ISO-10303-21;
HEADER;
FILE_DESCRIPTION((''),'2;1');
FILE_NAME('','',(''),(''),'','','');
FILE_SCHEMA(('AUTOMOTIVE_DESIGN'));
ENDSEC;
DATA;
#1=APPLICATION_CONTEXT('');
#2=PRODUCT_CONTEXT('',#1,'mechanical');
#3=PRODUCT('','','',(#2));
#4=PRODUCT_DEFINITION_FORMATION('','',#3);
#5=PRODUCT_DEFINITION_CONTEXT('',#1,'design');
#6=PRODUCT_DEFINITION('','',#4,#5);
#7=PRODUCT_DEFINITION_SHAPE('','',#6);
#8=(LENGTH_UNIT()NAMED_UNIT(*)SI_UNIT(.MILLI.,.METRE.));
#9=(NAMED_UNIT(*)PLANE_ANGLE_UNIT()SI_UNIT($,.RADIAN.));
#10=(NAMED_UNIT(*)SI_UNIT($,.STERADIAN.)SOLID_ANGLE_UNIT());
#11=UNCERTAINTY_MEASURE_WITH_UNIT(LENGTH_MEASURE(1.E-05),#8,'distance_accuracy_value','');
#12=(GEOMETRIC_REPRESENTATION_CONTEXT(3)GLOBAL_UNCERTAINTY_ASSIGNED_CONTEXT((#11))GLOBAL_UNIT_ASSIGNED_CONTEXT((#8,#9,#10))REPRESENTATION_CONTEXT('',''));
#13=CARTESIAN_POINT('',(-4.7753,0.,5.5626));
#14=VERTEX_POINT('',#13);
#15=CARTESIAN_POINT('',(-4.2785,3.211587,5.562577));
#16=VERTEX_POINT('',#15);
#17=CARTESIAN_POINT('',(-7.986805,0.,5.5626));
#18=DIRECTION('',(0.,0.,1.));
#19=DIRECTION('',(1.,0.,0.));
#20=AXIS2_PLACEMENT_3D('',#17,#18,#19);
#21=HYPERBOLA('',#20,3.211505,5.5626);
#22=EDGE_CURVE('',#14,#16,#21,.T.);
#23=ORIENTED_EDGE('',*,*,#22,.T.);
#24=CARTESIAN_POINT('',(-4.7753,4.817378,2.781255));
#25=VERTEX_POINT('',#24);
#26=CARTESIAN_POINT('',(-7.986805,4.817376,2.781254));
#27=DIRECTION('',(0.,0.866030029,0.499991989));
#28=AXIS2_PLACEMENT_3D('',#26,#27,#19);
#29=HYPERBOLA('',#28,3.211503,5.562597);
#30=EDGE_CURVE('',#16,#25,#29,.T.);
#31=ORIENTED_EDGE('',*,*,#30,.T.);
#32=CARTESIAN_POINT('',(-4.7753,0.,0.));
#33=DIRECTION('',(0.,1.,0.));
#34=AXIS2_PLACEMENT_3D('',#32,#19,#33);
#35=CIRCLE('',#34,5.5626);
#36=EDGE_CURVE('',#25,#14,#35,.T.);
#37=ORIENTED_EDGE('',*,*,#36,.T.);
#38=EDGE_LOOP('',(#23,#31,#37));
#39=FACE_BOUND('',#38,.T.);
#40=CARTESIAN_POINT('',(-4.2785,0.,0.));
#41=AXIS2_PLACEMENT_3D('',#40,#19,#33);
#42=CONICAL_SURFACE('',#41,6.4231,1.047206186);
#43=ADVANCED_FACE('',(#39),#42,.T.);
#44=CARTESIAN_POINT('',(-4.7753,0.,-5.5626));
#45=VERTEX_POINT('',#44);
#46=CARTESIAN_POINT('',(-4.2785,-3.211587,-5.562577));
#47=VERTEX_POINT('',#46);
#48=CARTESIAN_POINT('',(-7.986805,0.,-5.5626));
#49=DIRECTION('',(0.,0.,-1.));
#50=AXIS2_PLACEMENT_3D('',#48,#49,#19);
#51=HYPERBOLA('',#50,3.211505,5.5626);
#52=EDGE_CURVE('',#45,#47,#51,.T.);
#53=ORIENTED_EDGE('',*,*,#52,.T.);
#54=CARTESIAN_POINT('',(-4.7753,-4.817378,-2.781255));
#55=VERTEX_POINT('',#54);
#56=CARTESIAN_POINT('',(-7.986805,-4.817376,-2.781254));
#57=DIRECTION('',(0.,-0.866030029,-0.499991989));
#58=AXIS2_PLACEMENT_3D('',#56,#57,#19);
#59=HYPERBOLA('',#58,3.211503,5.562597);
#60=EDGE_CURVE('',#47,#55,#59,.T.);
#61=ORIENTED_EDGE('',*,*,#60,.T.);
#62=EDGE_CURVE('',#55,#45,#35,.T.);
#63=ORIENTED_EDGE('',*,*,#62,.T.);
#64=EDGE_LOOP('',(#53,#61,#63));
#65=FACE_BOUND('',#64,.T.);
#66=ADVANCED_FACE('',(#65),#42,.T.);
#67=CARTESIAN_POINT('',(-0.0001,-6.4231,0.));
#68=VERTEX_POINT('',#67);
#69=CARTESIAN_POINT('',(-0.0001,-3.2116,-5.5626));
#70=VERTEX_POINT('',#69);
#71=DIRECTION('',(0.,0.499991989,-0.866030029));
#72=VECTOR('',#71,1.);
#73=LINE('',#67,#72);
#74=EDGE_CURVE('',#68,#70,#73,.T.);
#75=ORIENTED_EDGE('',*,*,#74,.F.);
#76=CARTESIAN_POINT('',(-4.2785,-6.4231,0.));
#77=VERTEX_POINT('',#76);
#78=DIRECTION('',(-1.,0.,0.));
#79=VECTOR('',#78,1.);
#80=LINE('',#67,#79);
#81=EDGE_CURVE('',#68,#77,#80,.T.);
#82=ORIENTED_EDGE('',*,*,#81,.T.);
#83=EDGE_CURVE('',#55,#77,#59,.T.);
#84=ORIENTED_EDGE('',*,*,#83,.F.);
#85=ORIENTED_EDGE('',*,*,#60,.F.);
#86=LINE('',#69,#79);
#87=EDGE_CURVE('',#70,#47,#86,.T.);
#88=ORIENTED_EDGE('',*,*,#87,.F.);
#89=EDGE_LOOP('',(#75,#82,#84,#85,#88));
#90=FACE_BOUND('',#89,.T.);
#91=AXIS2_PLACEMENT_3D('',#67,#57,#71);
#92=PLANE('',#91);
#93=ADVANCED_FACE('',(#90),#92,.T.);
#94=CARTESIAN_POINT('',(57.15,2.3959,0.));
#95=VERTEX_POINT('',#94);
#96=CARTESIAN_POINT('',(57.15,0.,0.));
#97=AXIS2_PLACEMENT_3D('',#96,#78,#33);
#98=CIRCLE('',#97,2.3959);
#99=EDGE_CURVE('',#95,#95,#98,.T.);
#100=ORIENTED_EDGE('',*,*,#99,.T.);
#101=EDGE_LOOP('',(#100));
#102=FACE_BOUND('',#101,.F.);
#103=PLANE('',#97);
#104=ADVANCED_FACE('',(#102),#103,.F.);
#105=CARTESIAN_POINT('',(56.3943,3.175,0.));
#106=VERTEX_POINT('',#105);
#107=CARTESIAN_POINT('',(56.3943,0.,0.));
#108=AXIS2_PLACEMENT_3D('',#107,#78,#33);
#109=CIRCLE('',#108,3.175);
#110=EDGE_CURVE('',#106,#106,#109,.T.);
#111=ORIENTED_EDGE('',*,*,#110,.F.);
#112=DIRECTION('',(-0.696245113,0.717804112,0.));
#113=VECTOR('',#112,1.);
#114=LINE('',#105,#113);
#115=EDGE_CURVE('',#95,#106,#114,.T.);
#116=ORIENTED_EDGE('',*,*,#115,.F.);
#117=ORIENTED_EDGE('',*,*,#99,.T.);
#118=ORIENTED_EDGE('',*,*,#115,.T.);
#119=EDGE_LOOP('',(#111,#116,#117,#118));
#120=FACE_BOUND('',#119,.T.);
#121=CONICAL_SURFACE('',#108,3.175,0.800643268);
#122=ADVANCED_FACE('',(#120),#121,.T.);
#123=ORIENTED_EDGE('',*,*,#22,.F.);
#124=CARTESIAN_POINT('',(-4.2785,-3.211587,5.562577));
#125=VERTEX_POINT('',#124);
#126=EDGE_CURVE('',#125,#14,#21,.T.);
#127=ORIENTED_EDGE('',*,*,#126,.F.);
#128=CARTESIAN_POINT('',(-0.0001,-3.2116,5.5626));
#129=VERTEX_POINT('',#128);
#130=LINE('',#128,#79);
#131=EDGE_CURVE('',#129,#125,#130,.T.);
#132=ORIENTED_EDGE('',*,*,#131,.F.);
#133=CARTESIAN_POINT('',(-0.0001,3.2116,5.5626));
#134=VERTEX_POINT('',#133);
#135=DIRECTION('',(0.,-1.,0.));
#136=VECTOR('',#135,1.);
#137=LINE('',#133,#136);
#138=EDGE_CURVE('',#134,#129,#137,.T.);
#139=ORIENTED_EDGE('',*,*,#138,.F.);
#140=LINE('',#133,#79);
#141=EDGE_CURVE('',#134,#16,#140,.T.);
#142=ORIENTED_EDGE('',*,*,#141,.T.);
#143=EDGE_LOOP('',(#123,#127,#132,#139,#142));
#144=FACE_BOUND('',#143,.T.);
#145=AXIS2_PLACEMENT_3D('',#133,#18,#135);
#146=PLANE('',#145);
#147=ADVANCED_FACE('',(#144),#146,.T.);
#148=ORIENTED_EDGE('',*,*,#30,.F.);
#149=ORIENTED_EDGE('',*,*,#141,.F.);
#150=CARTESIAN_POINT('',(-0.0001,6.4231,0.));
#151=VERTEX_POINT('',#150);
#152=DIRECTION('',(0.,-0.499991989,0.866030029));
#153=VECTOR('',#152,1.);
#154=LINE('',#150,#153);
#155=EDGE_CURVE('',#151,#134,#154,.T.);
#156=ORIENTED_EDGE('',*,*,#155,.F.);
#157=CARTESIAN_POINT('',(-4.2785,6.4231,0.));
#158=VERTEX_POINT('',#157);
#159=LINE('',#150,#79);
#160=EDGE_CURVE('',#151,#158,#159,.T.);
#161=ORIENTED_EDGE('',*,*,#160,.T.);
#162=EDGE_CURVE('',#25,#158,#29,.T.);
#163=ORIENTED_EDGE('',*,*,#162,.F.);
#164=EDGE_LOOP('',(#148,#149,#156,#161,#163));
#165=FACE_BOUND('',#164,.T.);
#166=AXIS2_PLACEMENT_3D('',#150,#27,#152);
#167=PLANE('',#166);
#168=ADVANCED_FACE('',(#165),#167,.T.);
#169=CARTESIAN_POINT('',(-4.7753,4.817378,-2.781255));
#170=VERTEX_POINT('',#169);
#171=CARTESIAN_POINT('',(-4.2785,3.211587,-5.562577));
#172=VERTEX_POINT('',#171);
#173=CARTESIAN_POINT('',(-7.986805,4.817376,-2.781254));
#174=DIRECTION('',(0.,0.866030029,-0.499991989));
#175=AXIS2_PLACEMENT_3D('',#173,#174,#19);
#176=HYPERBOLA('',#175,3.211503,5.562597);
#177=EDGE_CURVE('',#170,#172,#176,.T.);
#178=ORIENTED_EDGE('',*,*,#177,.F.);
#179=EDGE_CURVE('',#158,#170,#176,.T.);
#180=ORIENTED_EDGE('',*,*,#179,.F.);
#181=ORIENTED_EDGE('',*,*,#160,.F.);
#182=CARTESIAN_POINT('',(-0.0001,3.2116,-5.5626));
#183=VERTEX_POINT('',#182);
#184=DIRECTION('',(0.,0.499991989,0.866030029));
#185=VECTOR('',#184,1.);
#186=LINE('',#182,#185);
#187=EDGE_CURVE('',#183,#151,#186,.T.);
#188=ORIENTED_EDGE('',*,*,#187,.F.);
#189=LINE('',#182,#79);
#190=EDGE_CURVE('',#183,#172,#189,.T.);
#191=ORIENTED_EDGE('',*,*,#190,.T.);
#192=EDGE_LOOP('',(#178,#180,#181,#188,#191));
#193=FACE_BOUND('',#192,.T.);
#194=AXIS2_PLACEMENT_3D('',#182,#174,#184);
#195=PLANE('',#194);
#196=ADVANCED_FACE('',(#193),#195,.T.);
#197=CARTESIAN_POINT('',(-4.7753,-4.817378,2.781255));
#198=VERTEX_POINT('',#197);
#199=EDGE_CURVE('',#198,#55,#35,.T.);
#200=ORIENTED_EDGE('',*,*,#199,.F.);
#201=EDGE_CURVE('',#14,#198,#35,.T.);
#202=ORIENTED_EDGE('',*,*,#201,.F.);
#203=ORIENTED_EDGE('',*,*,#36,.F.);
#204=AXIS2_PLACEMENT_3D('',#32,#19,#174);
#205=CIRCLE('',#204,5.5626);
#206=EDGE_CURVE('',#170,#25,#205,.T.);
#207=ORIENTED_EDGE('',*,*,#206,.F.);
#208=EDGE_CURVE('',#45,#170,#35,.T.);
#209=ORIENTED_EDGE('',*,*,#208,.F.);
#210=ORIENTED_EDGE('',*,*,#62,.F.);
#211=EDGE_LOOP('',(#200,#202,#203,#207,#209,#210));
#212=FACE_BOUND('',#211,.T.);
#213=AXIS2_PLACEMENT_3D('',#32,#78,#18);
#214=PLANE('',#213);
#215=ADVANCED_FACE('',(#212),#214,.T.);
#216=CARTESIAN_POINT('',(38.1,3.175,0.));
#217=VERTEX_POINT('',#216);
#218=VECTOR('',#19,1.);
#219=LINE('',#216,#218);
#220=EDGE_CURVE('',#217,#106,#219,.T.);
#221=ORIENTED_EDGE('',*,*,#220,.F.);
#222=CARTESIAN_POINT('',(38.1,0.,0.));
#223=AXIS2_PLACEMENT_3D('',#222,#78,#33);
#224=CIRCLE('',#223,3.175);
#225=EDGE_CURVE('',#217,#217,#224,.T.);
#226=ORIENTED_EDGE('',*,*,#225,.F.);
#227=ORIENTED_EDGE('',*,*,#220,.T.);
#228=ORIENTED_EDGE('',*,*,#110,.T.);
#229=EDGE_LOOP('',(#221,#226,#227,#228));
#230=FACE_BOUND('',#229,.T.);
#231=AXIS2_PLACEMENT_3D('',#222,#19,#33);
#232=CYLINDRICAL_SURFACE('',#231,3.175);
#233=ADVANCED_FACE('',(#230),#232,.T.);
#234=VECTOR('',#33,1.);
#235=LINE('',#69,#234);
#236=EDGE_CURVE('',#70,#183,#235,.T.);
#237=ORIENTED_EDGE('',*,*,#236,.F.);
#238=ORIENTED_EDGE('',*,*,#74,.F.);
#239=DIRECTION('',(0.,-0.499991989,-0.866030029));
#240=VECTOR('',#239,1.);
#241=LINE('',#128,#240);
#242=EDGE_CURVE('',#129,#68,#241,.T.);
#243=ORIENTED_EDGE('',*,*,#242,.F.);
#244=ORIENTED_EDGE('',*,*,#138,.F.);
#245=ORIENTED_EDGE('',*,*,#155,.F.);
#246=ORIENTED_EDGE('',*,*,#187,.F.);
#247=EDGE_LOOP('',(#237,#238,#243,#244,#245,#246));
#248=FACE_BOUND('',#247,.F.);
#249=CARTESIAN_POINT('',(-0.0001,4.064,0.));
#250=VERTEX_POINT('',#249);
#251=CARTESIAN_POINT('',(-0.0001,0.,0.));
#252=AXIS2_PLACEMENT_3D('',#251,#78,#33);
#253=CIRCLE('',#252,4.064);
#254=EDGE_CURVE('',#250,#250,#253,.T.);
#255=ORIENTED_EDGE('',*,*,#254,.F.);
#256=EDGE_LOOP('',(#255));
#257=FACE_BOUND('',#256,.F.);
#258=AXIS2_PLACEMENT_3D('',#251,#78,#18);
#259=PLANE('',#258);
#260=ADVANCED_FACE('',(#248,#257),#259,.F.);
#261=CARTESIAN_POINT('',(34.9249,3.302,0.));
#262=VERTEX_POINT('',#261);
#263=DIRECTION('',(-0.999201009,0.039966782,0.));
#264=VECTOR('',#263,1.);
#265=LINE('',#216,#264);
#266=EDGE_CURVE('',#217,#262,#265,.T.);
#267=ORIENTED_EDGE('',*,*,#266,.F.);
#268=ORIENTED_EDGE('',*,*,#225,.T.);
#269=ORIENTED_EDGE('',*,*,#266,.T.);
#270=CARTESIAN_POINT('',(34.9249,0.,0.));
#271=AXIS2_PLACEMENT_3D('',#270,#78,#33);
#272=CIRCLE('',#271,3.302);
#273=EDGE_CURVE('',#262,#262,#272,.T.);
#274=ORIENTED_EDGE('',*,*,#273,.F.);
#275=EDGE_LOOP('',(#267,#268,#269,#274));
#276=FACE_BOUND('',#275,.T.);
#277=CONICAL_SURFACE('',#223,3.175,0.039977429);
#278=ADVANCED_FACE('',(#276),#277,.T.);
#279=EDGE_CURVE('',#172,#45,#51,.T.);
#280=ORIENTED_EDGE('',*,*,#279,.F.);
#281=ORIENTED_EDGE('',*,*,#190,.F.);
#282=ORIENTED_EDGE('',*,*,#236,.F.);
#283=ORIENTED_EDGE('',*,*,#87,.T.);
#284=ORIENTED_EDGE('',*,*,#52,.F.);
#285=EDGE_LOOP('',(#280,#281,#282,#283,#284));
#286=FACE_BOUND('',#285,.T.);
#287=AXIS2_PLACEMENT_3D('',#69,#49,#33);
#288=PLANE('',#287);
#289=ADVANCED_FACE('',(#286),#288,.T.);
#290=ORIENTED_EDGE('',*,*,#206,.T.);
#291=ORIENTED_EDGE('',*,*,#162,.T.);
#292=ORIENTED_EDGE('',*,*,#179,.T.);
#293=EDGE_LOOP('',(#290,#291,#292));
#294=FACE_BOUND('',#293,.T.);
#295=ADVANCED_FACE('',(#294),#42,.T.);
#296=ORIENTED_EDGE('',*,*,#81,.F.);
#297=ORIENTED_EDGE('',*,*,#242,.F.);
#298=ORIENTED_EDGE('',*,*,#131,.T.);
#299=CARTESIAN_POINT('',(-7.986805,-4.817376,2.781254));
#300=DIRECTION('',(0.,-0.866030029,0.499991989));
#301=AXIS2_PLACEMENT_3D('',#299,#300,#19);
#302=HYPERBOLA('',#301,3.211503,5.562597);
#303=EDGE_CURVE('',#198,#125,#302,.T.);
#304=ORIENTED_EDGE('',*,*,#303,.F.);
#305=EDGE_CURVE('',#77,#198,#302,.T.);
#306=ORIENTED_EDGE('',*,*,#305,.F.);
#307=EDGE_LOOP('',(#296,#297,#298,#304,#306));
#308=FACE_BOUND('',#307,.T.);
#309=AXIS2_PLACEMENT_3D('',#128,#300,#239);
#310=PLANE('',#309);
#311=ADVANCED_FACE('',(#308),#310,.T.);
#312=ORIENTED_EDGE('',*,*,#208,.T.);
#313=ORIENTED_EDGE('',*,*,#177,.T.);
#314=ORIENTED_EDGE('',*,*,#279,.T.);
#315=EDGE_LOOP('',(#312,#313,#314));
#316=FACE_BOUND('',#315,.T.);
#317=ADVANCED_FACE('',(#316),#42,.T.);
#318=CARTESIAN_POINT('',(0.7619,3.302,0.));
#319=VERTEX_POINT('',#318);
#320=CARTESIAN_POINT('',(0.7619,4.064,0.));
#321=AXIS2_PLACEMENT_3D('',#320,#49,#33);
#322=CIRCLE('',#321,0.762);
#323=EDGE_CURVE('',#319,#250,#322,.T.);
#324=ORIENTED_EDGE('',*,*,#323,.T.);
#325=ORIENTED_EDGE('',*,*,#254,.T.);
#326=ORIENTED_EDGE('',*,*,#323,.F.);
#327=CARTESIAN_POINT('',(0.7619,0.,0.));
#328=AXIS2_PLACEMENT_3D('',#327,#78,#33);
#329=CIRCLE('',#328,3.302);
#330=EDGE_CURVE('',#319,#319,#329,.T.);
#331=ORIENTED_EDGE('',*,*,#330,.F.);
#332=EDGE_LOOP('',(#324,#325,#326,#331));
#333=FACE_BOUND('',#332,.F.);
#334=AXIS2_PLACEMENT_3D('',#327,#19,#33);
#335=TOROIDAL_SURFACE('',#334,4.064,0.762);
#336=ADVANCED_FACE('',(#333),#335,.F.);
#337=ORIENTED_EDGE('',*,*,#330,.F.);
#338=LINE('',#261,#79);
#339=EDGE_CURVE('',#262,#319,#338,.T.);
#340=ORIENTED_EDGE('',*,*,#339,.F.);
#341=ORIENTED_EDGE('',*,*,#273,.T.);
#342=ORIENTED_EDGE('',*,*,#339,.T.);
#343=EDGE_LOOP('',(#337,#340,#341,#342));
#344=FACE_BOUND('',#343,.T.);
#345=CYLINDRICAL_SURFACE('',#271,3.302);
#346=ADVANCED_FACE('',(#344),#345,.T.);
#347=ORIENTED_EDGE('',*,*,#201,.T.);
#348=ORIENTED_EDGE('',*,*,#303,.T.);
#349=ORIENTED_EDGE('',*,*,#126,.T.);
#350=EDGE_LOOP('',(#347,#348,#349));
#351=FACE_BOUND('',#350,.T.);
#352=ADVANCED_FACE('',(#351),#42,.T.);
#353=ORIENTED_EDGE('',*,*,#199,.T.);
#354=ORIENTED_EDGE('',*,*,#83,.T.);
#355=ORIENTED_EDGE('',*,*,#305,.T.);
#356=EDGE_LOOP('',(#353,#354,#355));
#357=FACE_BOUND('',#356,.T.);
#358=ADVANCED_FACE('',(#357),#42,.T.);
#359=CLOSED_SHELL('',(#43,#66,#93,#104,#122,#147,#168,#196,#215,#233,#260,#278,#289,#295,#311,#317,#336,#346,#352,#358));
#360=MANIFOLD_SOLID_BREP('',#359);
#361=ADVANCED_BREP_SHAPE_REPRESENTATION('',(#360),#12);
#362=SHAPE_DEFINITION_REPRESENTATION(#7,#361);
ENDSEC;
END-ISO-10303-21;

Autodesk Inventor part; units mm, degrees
ref_plane "YZ Plane" through (0, 0, 0) normal (1, 0, 0) x (0, 1, 0)
ref_plane "XZ Plane" through (0, 0, 0) normal (0, 1, 0) x (-1, 0, 0)
sketch "Sketch1" plane through (0, 0, 0) normal (0, 0, 1) x (1, 0, 0)
  line L0 (0, 5.5626) -> (0, 3.302)
  line L1 (38.1, 3.175) -> (57.15, 3.175)
  line L2 (57.15, 3.175) -> (57.15, 0)
  line L3 (57.15, 0) -> (-0.0001, 0)
  line L4 (-11.4301, 0) -> (68.58, 0) projected
  line L5 (-0.0001, 0) -> (-0.0001, 5.5626)
  line L6 (-0.0001, 5.5626) -> (0, 5.5626)
  line L7 (38.1, 3.175) -> (34.9249, 3.302)
  line L8 (34.9249, 3.302) -> (0, 3.302)
  line L9 (0, -1.1125) -> (0, 6.6751) projected
  dimension "d0" = 57.15
  dimension "d1" = 19.05
  dimension "d2" = 6.35
  dimension "d9" = 0.0001
  dimension "d10" = 11.1252
  dimension "d13" = 3.1751
  dimension "d14" = 6.604
revolve "Body" add sketch "Sketch1" angle 360 about axis through (57.15, 0, 0) along (-1, 0, 0)
sketch "Sketch2" plane through (-0.0001, 0, 0) normal (-1, 0, 0) x (0, 0, 1)
  line L0 (0, 6.4231) -> (5.5626, 3.2116)
  line L1 (5.5626, 3.2116) -> (5.5626, -3.2116)
  line L2 (5.5626, -3.2116) -> (0, -6.4231)
  line L3 (0, -6.4231) -> (-5.5626, -3.2116)
  line L4 (-5.5626, -3.2116) -> (-5.5626, 3.2116)
  line L5 (-5.5626, 3.2116) -> (0, 6.4231)
  point P0 (0, 0)
  point P1 (0, 0)
  dimension "d11" = 11.1252
extrude "Head" add sketch "Sketch2" along normal blind 4.7752
sketch "Sketch4" plane through (0, 0, 0) normal (0, 0, 1) x (1, 0, 0)
  line L0 (-4.7753, 5.5626) -> (-4.7753, 6.4231)
  line L1 (-4.7753, 6.4231) -> (-4.2785, 6.4231)
  line L2 (-4.2785, 6.4231) -> (-4.7753, 5.5626)
  line L3 (-5.7303, 0) -> (0.9549, 0) projected
  line L4 (-0.0001, 6.4231) -> (-4.7753, 6.4231) projected
  line L5 (-4.7753, 3.2116) -> (-4.7753, 6.4231) projected
  dimension "d5" = 30
  dimension "d19" = 11.1252
revolve "Chamfer1" cut sketch "Sketch4" angle 360 about axis through (-10, 0, 0) along (1, 0, 0)
thread "Thread" size "1/4-20 UNC" class "2A" standard "ANSI Unified Screw Threads" length 19.05
chamfer "Chamfer2" distance 0.7791 distance2 0.7557 1 edges at (57.15, -3.175, 0) measured on face at (57.15, -1.44, -0.4308)
ref_plane "Work Plane1" through (1.525, 0, 0) normal (0, 0, 1) x (1, 0, 0)
fillet "Fillet2" radius 0.762 1 edges at (0, -3.302, 0)
equation "\"d0\" = NLG"
equation "\"d1\" = GEL"
equation "\"d2\" = GD"
equation "\"d10\" = SD2"
equation "\"d14\" = BDM"
equation "\"d11\" = SW"
equation "\"d3\" = KOH - SD"
equation "\"d5\" = ANG1"
equation "\"d19\" = SW0"
equation "\"d63\" = R"
equation "\"d15\" = GEL"
equation "\"d6\" = -0.5 * SPD + 0.5 * GD"
equation "\"NLG\" = 57.15"
equation "\"GD\" = NND"
equation "\"BDM\" = 6.604"
equation "\"KOH\" = 4.7752"
equation "\"GEL\" = 19.05"
equation "\"SW\" = 11.1252"
equation "\"SW0\" = SW"
equation "\"SPD\" = GD1"
equation "\"SD2\" = SW"
equation "\"SD\" = 0"
equation "\"ANG1\" = 30deg"
equation "\"GAL\" = 3.175"
equation "\"GUL\" = 0.238 * GAL"
equation "\"R\" = 0.762"
equation "\"d62\" = -NLG - SD + GUL"
equation "\"GD1\" = 4.79184"
equation "\"THREADDIA\" = 6.35"
equation "\"TOA\" = 30deg"
equation "\"NND\" = 6.35"
equation "\"E0\" = 1.155 * SW"
properties part number "ANSI/ASME B18.2.1 - 1/4-20 UNC - 2.25" material "Steel, Mild"
